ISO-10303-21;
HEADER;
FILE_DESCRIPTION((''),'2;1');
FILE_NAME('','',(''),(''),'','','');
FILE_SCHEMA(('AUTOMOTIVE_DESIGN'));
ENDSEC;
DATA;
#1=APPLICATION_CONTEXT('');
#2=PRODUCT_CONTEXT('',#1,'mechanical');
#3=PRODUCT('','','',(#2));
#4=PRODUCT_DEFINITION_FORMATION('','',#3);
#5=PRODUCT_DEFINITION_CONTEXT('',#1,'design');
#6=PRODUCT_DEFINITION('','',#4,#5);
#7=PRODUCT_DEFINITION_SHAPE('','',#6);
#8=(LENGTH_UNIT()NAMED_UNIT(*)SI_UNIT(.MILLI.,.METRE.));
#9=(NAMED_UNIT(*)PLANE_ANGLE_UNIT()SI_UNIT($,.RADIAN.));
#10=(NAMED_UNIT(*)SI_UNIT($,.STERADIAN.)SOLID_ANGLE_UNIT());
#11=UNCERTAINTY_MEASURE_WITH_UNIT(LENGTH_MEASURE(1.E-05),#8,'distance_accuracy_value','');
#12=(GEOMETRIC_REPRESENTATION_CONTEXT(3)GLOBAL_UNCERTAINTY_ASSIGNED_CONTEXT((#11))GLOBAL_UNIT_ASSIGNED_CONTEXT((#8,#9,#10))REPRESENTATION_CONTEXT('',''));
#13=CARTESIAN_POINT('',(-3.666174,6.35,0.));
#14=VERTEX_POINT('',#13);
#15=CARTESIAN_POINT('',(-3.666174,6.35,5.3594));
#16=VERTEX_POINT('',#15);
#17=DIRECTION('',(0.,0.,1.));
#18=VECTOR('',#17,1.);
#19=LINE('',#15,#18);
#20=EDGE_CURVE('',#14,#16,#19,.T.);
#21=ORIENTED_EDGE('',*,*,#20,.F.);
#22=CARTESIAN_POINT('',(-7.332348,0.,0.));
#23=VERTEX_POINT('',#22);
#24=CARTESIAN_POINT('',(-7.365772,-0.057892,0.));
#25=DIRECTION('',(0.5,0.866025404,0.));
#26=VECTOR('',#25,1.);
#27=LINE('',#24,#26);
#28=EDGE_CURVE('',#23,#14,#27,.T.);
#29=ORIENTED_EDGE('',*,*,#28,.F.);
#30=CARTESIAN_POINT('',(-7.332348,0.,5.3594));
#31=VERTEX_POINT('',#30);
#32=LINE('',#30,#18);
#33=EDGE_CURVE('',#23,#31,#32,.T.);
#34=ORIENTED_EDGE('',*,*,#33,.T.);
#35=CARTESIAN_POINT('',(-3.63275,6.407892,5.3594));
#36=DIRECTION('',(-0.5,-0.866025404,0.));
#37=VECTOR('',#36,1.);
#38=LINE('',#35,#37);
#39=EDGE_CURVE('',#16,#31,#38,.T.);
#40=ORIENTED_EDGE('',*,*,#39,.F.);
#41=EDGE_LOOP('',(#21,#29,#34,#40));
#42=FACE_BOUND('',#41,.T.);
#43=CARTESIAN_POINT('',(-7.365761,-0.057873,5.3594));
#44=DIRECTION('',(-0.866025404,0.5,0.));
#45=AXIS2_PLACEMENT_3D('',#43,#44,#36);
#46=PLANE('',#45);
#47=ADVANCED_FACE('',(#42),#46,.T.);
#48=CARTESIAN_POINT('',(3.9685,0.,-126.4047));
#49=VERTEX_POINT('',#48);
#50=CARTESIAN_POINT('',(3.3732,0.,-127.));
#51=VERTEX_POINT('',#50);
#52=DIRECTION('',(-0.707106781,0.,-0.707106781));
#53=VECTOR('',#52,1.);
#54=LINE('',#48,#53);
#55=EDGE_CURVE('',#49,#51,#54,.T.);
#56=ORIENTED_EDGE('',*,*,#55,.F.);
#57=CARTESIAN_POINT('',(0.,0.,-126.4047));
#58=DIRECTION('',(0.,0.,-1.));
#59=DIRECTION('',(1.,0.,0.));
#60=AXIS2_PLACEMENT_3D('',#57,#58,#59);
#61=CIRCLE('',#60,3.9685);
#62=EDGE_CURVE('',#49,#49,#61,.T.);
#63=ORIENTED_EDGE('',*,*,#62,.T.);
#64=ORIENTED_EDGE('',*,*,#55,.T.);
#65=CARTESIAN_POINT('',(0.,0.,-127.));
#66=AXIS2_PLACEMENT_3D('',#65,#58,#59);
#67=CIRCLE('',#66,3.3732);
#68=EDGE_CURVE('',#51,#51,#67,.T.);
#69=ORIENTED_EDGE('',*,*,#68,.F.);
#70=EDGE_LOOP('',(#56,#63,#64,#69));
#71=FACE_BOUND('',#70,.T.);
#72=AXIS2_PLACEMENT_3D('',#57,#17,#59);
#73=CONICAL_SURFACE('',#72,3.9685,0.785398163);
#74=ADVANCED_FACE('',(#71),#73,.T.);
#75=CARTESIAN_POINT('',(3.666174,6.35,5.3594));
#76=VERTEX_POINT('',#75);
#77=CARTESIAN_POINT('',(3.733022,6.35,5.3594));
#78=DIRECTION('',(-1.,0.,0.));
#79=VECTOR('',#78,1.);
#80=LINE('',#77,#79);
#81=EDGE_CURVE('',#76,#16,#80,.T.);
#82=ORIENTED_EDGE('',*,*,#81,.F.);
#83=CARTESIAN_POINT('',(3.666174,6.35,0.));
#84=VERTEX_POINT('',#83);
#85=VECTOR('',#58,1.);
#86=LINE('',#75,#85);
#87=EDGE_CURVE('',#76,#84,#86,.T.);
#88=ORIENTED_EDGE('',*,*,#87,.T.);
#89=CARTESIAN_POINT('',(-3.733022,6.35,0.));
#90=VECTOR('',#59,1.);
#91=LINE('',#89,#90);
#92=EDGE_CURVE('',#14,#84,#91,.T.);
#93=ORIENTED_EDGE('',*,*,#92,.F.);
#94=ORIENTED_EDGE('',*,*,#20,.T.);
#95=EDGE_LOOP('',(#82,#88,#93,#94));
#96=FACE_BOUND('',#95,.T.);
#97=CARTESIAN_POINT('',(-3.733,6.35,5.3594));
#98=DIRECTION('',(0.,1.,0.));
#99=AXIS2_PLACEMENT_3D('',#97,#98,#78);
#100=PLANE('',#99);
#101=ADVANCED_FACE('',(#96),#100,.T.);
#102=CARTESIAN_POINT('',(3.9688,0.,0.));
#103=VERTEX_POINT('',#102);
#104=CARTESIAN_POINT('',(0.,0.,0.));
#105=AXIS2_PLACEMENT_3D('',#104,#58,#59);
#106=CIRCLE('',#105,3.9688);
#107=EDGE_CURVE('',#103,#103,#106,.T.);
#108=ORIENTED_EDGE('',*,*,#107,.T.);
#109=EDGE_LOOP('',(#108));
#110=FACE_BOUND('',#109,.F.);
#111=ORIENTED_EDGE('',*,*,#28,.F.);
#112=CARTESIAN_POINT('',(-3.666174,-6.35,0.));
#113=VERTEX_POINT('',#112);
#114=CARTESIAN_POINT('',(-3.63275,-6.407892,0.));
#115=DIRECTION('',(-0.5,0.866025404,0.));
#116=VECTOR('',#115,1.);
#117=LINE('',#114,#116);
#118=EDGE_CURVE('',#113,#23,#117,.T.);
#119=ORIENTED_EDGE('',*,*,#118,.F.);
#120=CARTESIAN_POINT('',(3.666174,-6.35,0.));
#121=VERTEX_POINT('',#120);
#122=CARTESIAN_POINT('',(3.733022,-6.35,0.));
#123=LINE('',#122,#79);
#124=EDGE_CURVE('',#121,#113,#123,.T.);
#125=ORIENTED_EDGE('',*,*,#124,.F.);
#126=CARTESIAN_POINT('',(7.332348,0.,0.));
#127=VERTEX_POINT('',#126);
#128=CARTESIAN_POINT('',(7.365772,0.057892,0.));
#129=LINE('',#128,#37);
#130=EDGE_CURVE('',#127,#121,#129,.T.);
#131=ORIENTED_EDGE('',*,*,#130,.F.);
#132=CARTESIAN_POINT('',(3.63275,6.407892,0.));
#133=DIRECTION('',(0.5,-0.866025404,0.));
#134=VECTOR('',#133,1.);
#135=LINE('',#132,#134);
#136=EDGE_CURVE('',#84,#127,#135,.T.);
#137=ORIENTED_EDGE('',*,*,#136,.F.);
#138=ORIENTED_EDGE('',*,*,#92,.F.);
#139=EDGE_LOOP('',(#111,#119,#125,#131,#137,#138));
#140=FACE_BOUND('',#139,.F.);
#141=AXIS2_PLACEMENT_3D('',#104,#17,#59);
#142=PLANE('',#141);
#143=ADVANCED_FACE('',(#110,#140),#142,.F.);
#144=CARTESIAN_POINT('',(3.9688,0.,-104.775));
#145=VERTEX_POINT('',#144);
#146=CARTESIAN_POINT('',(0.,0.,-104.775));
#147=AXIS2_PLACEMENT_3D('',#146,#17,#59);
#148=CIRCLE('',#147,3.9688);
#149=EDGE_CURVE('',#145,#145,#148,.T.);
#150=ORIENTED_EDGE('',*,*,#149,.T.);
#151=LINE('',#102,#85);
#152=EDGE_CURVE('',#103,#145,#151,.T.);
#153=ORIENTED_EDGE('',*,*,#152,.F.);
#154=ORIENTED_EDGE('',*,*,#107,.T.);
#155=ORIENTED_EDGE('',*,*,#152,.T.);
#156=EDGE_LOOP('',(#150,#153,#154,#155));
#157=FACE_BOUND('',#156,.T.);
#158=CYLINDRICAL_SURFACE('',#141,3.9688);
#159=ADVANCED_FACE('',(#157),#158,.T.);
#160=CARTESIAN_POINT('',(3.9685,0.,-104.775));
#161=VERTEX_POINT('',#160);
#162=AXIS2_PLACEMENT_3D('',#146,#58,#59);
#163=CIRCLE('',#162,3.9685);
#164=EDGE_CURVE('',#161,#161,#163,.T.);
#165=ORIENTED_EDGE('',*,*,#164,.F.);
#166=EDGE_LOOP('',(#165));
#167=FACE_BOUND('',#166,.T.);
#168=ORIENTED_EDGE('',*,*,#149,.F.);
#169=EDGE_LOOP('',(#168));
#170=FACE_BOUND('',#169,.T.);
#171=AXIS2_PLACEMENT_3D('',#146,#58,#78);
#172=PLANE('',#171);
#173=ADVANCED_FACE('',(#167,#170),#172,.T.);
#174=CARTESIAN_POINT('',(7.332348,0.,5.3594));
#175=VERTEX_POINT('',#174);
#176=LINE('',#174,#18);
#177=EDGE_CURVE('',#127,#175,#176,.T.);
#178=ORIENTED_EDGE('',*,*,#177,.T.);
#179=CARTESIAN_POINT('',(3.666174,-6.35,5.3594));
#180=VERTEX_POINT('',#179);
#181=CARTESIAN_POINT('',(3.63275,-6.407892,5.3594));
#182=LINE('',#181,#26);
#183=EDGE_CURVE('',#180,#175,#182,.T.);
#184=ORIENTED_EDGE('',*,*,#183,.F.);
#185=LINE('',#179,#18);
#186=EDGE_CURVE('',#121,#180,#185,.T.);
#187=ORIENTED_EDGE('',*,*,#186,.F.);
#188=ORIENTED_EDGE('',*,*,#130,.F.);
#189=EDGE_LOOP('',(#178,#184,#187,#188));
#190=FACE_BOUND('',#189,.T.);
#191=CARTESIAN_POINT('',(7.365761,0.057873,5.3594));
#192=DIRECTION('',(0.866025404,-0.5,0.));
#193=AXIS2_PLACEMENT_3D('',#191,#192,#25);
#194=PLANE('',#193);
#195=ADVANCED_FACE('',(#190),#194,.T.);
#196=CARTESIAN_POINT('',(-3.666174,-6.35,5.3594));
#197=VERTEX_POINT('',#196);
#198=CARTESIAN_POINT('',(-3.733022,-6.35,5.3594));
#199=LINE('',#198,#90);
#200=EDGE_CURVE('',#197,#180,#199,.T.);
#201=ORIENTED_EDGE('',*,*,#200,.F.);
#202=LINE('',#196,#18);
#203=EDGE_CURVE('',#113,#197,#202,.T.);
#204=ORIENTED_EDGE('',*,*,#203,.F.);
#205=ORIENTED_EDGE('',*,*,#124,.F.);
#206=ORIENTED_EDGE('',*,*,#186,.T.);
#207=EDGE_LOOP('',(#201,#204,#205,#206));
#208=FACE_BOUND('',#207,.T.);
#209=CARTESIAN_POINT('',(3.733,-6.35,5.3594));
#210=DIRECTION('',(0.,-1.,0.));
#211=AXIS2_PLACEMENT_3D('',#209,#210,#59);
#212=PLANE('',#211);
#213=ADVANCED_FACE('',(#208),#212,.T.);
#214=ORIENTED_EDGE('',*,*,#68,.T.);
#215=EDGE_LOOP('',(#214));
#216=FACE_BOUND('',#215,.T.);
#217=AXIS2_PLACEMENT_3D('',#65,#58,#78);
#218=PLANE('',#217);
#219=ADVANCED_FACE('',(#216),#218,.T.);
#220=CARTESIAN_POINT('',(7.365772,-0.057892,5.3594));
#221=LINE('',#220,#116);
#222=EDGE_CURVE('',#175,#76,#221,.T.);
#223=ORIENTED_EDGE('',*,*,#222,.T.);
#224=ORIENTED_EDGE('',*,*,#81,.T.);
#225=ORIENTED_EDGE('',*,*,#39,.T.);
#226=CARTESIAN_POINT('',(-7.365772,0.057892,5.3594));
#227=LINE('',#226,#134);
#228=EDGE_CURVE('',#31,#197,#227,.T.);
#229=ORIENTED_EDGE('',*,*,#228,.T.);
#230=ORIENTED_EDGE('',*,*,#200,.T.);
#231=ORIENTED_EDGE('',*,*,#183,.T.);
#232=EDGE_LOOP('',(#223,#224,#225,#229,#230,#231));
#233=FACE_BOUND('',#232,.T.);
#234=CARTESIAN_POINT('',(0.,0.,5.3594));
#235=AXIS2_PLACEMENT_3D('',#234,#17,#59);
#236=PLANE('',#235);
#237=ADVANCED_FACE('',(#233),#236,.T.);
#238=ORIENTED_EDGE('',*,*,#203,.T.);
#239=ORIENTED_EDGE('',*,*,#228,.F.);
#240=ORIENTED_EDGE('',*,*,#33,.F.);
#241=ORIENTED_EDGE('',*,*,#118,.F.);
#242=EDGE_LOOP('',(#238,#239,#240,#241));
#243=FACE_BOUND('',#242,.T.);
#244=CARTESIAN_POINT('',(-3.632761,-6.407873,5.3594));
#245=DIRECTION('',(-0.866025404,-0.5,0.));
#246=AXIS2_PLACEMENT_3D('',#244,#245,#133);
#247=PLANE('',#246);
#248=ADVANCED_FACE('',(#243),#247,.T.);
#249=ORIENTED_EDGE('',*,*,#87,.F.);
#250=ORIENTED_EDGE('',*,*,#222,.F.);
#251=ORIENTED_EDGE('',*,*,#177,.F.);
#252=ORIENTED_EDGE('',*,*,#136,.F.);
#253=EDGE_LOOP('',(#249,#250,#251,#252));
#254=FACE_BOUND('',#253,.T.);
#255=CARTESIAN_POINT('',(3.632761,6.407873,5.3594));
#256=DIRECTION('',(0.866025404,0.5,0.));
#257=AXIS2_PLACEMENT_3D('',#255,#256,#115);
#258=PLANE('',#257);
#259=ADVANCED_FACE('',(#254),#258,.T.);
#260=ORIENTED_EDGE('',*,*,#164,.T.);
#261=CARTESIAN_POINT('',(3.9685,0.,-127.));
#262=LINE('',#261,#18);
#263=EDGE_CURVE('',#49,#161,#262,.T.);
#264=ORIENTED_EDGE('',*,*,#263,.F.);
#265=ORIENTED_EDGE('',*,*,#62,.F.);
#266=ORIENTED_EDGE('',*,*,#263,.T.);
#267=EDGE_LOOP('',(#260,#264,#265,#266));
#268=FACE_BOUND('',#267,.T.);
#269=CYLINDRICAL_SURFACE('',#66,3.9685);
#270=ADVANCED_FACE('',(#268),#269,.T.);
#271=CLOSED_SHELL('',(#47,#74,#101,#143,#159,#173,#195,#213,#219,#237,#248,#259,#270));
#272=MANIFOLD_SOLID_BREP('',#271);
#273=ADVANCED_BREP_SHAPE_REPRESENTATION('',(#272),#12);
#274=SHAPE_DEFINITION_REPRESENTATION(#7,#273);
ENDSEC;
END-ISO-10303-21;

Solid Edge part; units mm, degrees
sketch "Sketch1" plane through (0, 0, 0) normal (0, 0, 1) x (1, 0, 0)
  circle A0 centre (0, 0) radius 7.366
  dimension "D1" = 14.732
extrude "Protrusion1" add sketch "Sketch1" along normal blind 5.3594
sketch "Sketch2" plane through (0, 0, 0) normal (0, 0, -1) x (1, 0, 0)
  circle A0 centre (0, 0) radius 3.9688
extrude "Protrusion2" add sketch "Sketch2" along normal blind 127
sketch "Sketch3" plane through (0, 0, -127) normal (0, 0, -1) x (1, 0, 0)
  circle A0 centre (0, 0) radius 3.9685
extrude "Cutout1" cut sketch "Sketch3" against normal blind 22.225 flip side to cut
chamfer "Chamfer_1" distance 0.5953 angle 45 1 edges at (-3.9685, 0, -127)
sketch "Sketch4" plane through (0, 0, 5.3594) normal (0, 0, 1) x (1, 0, 0)
  line L0 (-3.733, 6.35) -> (3.733, 6.35)
  dimension "D1" = 12.7
extrude "Cutout2" cut sketch "Sketch4" against normal up to next material side at (0, 6.4, 5.3594)
pattern_circular "Pattern1" count 6 over 360 about axis through (0, 0, 5.3594) along (0, 0, 1) of "Cutout2"
properties part number "24100079"
